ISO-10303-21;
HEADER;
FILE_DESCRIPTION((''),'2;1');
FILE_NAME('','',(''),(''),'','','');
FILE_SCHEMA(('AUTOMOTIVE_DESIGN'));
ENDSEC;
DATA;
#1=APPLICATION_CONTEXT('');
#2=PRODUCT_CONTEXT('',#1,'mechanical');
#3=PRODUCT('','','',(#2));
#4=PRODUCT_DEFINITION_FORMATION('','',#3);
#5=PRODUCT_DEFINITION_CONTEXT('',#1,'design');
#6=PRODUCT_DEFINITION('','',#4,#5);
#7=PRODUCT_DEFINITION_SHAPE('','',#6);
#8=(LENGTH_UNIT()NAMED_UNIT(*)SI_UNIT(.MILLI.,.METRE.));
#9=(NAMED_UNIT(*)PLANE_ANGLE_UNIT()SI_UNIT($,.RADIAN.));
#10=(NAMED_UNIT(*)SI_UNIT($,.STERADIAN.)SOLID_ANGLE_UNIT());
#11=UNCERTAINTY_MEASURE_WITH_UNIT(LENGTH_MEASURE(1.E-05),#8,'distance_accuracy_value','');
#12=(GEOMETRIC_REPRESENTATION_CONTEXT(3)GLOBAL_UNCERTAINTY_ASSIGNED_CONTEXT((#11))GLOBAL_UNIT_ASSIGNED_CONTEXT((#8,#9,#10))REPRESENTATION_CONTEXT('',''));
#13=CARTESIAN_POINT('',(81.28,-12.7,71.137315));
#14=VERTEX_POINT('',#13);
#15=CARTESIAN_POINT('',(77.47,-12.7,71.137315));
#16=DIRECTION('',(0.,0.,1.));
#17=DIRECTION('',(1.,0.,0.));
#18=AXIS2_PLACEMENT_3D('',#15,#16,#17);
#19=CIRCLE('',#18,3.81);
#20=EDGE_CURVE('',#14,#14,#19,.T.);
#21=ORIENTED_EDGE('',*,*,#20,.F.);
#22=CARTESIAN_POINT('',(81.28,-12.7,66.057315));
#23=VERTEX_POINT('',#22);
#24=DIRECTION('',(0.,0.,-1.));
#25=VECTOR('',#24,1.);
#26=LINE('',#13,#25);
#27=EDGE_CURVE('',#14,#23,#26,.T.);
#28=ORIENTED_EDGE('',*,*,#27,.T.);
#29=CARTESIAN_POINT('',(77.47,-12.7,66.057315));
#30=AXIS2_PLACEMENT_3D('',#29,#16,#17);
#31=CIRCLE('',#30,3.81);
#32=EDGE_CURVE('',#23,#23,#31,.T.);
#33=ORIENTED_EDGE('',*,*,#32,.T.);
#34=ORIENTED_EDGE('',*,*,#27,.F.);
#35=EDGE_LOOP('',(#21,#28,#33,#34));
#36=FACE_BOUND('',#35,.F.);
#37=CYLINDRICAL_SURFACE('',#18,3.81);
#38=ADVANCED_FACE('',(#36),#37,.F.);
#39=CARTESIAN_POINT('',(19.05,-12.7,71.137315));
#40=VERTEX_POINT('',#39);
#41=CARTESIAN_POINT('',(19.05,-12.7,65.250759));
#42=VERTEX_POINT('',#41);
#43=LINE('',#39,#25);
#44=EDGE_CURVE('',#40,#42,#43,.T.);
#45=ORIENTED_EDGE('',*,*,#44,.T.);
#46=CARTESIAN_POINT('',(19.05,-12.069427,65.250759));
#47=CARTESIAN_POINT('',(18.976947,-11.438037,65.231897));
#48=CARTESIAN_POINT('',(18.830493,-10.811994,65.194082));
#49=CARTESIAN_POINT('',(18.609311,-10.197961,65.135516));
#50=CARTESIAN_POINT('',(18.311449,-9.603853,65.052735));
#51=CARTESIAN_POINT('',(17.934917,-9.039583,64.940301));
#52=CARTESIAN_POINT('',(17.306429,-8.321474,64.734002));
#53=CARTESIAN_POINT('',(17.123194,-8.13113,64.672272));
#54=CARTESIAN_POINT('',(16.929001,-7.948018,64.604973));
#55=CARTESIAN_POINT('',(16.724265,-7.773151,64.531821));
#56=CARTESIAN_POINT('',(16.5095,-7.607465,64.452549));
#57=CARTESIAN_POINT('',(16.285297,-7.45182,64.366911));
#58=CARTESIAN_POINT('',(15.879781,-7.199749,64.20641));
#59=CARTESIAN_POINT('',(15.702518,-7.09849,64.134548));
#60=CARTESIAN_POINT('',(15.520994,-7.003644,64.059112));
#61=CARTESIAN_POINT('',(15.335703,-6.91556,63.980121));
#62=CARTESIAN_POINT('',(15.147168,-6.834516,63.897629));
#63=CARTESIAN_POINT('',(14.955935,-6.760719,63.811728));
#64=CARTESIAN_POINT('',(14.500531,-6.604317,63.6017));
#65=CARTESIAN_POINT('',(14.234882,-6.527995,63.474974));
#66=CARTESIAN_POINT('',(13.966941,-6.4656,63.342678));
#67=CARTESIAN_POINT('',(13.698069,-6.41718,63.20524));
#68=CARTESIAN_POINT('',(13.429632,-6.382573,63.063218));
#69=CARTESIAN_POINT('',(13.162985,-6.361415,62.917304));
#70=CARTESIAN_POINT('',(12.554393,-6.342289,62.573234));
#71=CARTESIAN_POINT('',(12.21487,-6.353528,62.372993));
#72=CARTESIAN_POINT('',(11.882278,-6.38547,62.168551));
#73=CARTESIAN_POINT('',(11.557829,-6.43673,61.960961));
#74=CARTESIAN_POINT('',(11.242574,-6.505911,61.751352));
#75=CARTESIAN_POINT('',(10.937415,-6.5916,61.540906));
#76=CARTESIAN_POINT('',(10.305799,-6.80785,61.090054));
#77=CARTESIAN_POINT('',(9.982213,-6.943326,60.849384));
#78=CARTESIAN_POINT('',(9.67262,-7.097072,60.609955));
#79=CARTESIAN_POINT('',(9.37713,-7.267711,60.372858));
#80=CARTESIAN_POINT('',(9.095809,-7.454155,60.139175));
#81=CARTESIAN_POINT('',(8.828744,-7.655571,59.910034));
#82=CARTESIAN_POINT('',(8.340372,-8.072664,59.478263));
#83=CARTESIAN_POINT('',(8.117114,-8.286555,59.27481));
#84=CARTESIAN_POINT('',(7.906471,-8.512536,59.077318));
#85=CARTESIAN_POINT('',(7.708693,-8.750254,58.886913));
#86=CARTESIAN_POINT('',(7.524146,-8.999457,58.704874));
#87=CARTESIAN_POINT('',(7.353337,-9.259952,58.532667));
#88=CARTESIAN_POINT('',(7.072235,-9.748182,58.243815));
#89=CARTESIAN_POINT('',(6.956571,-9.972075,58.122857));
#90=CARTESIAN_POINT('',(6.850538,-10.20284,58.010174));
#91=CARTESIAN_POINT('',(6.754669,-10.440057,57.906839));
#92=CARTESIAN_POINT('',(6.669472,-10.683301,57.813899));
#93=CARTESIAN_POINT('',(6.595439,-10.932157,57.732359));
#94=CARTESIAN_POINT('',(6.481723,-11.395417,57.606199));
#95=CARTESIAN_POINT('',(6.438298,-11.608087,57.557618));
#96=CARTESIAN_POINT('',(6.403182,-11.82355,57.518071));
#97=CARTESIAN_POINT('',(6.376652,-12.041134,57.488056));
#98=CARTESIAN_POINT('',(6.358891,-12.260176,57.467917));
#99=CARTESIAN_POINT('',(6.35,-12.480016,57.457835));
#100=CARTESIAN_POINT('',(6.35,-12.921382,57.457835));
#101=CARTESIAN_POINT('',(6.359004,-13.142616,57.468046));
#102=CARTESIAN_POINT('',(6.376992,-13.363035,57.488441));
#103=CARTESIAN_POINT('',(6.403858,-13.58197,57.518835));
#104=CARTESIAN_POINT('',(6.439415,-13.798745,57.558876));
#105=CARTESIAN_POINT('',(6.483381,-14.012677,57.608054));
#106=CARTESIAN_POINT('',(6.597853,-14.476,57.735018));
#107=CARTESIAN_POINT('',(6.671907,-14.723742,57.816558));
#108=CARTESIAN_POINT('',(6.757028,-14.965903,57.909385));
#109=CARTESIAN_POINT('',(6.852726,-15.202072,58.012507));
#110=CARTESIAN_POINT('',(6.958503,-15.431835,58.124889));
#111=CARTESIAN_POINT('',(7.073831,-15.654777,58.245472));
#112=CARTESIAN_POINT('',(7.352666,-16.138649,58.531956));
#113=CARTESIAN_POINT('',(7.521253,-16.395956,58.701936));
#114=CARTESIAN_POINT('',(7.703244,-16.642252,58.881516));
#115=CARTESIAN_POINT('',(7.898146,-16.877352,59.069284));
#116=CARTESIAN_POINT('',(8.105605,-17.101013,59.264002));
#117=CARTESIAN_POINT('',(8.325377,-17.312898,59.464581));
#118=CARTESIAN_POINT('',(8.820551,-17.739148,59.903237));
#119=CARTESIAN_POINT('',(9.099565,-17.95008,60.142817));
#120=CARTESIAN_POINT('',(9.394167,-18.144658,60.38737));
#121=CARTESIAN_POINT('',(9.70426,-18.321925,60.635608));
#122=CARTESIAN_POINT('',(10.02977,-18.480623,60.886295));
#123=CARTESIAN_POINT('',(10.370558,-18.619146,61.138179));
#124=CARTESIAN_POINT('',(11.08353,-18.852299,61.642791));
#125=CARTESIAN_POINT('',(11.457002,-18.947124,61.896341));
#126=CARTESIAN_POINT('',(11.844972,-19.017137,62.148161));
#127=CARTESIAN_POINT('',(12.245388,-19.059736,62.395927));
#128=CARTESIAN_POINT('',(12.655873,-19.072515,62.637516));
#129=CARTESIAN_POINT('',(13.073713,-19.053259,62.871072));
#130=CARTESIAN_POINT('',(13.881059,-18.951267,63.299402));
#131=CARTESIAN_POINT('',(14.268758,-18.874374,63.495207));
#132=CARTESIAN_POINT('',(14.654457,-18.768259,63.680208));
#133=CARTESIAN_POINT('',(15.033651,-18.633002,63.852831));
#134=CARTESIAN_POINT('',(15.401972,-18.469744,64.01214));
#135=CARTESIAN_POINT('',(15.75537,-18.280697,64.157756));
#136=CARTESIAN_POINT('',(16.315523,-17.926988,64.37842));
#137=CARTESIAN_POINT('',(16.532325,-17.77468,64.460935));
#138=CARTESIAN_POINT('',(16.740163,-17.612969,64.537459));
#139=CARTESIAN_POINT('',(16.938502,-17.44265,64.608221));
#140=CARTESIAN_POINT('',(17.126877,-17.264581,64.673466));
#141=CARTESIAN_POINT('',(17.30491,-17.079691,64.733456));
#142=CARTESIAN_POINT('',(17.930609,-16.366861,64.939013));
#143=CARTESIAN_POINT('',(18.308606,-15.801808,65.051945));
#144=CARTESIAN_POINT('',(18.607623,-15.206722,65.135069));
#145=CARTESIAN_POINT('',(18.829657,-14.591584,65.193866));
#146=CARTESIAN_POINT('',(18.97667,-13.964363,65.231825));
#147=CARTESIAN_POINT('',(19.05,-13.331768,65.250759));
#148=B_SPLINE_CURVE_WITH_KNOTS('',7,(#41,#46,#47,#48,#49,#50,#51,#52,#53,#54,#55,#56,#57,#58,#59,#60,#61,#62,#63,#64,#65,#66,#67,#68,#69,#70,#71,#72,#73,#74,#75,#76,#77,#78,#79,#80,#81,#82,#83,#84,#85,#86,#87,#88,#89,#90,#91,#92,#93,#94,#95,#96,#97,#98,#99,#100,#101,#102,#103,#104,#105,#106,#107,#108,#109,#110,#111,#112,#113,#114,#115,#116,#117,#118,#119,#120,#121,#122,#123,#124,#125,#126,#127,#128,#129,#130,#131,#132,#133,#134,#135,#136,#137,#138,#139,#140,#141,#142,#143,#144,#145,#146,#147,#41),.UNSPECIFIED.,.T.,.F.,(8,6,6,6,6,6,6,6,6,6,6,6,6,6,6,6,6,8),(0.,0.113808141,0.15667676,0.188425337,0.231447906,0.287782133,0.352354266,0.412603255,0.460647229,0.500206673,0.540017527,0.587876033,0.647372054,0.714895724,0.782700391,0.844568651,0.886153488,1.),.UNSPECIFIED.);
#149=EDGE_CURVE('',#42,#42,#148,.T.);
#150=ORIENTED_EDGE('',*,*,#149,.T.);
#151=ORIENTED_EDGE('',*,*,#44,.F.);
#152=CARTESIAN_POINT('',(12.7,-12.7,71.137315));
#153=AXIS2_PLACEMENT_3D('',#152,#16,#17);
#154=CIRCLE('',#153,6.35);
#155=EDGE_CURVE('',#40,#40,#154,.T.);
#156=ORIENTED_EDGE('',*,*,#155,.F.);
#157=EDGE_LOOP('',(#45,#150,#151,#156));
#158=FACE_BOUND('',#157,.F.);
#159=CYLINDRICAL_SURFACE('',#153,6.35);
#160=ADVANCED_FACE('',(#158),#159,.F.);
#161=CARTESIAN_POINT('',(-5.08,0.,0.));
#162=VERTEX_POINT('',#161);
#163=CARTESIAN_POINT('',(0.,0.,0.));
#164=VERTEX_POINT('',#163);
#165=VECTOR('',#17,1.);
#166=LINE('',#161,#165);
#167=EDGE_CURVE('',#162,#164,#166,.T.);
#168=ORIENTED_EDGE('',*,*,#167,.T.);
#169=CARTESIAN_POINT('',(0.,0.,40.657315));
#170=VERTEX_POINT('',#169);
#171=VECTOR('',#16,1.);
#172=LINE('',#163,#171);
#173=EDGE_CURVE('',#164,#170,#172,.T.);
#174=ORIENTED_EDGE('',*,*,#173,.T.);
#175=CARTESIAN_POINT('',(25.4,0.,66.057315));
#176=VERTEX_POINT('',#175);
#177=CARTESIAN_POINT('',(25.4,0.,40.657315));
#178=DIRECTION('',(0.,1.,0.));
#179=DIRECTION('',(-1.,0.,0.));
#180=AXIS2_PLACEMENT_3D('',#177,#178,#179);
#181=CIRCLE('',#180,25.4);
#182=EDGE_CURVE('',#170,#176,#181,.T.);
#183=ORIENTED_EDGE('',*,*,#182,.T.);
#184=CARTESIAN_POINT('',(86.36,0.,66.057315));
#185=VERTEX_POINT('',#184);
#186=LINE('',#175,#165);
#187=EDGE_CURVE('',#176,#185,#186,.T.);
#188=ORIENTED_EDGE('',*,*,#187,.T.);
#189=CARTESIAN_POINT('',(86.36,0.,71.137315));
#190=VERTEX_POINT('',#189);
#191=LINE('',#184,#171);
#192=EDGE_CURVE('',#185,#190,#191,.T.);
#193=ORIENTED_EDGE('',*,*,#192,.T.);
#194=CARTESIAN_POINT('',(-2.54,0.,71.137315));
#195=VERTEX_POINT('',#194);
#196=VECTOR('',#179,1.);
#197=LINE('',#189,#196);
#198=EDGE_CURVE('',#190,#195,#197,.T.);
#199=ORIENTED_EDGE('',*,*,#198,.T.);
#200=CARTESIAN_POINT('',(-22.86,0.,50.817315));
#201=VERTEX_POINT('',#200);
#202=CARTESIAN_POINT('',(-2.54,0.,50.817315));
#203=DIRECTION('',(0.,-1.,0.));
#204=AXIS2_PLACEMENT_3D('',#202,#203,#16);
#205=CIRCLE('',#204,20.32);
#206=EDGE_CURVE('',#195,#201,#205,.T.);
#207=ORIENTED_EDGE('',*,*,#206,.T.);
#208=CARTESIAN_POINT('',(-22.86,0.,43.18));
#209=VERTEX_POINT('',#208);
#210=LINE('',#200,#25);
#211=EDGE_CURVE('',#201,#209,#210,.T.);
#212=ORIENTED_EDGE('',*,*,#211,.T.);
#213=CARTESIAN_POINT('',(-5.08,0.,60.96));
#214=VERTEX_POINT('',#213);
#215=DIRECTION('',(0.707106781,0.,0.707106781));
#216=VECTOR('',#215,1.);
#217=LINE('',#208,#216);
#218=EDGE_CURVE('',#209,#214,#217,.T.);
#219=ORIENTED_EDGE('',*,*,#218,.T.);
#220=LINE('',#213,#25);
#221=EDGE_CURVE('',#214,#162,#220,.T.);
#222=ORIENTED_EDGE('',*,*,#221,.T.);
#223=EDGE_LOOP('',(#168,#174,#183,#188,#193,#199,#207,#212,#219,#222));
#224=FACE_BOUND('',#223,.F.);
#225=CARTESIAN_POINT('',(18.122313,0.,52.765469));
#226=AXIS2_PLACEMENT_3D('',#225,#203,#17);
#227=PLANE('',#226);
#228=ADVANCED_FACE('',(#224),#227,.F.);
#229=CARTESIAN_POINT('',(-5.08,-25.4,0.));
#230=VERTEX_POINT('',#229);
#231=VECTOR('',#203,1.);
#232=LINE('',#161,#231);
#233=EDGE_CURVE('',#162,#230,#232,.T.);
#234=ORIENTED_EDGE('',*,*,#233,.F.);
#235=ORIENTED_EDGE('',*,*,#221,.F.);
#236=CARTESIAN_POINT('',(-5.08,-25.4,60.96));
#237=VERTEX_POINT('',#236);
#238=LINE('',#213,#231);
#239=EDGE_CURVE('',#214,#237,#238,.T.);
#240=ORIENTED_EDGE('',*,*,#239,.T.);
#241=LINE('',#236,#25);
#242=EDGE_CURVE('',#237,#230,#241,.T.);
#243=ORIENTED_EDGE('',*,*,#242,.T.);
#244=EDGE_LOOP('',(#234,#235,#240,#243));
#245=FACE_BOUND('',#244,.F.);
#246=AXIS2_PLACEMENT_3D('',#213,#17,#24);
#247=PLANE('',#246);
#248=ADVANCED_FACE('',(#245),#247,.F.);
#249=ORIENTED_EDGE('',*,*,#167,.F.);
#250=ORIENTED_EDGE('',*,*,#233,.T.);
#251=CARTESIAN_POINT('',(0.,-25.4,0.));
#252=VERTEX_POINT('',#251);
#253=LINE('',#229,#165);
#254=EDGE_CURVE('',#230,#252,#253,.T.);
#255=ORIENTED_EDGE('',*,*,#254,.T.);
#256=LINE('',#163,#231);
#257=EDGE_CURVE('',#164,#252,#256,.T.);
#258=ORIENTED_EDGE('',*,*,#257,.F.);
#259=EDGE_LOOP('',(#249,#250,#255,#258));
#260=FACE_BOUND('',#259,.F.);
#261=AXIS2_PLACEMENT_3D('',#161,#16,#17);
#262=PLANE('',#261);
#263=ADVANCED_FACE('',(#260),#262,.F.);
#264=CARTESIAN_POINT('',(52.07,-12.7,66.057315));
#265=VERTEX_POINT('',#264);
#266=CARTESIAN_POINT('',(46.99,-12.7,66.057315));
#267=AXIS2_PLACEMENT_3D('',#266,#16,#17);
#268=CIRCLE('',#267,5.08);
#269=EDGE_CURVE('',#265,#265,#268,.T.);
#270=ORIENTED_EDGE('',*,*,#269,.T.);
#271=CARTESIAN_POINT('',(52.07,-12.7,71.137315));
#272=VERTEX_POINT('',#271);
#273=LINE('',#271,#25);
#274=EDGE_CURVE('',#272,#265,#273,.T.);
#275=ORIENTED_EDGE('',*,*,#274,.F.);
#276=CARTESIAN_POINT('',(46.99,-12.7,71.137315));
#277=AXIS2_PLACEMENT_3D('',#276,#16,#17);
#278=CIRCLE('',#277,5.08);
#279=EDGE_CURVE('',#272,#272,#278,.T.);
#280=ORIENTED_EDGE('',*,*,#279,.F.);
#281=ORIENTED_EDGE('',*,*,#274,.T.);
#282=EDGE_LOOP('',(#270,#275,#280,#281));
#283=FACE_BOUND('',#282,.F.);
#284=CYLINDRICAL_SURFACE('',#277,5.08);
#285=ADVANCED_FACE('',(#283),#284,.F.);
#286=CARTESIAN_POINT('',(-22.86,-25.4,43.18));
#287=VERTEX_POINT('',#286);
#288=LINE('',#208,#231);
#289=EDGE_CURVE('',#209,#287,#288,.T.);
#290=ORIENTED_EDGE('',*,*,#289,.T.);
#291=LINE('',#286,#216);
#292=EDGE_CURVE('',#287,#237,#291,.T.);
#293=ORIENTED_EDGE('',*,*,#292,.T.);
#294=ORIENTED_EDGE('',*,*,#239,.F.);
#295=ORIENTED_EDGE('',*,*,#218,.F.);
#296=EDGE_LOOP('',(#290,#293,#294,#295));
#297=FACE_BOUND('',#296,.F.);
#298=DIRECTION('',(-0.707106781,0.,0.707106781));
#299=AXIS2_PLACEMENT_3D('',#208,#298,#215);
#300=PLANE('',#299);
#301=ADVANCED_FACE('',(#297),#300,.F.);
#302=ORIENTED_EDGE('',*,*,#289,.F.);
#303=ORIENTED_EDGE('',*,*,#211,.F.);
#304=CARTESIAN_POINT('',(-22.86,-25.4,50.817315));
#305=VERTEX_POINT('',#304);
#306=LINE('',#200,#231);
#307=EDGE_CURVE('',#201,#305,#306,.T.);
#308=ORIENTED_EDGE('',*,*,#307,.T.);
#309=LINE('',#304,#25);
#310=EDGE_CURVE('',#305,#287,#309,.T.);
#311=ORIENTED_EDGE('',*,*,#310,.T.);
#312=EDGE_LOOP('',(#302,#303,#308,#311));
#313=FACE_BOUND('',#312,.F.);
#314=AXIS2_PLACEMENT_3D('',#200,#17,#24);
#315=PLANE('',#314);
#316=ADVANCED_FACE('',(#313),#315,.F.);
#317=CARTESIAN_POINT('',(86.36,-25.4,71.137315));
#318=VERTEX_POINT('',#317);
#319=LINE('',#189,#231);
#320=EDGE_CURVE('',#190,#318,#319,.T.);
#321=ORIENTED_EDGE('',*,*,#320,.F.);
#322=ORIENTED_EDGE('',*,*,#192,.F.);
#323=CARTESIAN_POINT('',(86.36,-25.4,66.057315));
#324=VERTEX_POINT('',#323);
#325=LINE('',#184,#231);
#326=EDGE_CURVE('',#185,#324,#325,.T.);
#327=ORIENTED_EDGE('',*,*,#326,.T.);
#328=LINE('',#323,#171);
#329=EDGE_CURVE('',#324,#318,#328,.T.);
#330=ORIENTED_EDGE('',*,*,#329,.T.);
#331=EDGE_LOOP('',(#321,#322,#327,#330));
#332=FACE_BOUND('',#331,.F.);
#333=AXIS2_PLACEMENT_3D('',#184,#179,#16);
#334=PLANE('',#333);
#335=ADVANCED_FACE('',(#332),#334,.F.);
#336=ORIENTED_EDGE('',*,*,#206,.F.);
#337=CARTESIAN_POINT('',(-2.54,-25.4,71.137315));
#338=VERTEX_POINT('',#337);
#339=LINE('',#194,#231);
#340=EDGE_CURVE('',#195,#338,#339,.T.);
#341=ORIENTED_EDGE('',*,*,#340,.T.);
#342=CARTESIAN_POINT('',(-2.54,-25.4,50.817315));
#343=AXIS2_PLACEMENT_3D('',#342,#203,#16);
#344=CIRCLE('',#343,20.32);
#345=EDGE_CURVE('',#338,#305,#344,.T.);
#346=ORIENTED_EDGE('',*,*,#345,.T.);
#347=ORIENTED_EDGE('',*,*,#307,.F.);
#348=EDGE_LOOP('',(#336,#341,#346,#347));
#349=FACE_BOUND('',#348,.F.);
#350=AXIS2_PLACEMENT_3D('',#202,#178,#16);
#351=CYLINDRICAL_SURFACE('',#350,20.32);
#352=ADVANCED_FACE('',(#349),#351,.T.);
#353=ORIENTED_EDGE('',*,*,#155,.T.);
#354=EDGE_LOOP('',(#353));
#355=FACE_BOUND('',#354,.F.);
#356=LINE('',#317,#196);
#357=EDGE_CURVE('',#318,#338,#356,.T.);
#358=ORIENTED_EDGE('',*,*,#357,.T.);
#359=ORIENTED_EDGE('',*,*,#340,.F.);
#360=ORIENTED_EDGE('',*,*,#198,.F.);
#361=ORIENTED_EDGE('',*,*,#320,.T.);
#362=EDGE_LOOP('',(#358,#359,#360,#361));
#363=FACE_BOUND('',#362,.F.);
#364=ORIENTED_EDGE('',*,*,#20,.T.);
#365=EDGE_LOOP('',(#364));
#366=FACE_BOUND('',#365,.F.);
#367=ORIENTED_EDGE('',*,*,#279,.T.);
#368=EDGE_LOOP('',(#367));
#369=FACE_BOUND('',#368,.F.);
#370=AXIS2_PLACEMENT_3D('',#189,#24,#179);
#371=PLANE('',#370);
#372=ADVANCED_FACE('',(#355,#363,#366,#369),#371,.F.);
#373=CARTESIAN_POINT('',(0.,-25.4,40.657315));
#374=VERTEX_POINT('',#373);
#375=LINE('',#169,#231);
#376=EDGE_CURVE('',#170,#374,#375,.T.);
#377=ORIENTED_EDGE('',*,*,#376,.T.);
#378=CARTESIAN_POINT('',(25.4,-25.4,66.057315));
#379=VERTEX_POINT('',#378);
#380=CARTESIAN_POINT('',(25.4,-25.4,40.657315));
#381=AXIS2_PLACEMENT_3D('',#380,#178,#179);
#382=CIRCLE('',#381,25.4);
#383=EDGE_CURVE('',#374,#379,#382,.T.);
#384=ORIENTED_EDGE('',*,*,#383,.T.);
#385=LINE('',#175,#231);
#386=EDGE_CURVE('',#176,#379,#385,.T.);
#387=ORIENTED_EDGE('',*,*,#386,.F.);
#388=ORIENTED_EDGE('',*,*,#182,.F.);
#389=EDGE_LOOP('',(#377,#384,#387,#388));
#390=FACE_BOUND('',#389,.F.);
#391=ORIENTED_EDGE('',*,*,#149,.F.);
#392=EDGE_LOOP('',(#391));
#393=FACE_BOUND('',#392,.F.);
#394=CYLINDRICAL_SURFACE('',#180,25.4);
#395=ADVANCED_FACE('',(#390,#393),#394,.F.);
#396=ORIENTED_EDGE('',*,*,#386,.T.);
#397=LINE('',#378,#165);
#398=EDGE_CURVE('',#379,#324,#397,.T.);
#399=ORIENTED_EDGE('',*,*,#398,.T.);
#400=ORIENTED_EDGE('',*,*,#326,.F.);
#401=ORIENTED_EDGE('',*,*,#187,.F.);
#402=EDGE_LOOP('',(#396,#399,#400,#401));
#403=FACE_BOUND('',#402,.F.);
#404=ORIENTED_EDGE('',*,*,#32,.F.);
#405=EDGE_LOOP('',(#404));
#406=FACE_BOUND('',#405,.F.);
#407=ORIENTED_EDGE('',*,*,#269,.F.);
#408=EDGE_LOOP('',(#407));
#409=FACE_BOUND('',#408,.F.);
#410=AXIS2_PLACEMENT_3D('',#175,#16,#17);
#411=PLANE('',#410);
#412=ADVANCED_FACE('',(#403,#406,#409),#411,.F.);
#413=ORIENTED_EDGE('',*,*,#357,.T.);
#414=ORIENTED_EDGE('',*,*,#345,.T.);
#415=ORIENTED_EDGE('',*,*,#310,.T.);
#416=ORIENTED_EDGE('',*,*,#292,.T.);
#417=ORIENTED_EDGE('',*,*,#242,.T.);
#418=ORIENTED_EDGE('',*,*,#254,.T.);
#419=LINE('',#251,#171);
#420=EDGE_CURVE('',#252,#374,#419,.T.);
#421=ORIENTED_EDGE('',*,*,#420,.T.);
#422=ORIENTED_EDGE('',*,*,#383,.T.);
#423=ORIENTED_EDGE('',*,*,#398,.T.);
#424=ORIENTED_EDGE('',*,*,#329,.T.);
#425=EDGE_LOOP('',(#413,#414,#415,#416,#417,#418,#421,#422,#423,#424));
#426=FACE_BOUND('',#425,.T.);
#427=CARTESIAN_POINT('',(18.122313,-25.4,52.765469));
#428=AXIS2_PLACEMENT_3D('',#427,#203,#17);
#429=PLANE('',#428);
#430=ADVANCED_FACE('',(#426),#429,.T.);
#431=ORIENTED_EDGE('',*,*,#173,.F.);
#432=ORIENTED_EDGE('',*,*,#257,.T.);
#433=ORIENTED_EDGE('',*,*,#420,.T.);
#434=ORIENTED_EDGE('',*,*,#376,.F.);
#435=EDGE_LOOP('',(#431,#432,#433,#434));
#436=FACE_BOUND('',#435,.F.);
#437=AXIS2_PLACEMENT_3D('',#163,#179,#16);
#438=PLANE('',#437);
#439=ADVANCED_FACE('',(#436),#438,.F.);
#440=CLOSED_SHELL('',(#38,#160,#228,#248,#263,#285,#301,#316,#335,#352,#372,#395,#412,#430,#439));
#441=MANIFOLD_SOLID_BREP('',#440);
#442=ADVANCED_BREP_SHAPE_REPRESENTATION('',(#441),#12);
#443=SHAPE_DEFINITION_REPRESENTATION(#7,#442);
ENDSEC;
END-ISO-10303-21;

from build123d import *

# Parameters (mm, degrees)
F1_DEPTH = 25.4
F2_R     = 3.81
F2_R_2   = 5.08
F2_R_3   = 6.35
F3_DEPTH = 71.1383146132


# Not quite as in the source:
# - a feature names something its author has since deleted; it is built from what else it names


with BuildPart() as f1:
    # F0 (on Front) → F1 (new body)
    with BuildSketch(Plane.XZ):
        with BuildLine():
            Line((-5.08, 0), (0, 0))
            Line((0, 0), (0, 38.1))
            Line((0, 38.1), (0, 40.6573146132))
            ThreePointArc((0, 40.6573146132), (7.4394877579, 58.6178268553), (25.4, 66.0573146132))
            Line((25.4, 66.0573146132), (86.36, 66.0573146132))
            Line((86.36, 66.0573146132), (86.36, 71.1373146132))
            Line((86.36, 71.1373146132), (0, 71.1373146132))
            Line((0, 71.1373146132), (-2.54, 71.1373146132))
            ThreePointArc((-2.54, 71.1373146132), (-16.9084097937, 65.1857244069), (-22.86, 50.8173146132))
            Line((-22.86, 50.8173146132), (-22.86, 43.18))
            Line((-22.86, 43.18), (-5.08, 60.96))
            Line((-5.08, 60.96), (-5.08, 0))
        make_face()
    extrude(amount=F1_DEPTH)

    # F2 (on face) → F3 (cut, through all)
    with BuildSketch(Plane.XY.offset(71.1373146132)):
        with Locations((77.47, -12.7)):
            Circle(F2_R)
        with Locations((46.99, -12.7)):
            Circle(F2_R_2)
        with Locations((12.7, -12.7)):
            Circle(F2_R_3)
    extrude(amount=-F3_DEPTH, mode=Mode.SUBTRACT)


solid = f1.part
